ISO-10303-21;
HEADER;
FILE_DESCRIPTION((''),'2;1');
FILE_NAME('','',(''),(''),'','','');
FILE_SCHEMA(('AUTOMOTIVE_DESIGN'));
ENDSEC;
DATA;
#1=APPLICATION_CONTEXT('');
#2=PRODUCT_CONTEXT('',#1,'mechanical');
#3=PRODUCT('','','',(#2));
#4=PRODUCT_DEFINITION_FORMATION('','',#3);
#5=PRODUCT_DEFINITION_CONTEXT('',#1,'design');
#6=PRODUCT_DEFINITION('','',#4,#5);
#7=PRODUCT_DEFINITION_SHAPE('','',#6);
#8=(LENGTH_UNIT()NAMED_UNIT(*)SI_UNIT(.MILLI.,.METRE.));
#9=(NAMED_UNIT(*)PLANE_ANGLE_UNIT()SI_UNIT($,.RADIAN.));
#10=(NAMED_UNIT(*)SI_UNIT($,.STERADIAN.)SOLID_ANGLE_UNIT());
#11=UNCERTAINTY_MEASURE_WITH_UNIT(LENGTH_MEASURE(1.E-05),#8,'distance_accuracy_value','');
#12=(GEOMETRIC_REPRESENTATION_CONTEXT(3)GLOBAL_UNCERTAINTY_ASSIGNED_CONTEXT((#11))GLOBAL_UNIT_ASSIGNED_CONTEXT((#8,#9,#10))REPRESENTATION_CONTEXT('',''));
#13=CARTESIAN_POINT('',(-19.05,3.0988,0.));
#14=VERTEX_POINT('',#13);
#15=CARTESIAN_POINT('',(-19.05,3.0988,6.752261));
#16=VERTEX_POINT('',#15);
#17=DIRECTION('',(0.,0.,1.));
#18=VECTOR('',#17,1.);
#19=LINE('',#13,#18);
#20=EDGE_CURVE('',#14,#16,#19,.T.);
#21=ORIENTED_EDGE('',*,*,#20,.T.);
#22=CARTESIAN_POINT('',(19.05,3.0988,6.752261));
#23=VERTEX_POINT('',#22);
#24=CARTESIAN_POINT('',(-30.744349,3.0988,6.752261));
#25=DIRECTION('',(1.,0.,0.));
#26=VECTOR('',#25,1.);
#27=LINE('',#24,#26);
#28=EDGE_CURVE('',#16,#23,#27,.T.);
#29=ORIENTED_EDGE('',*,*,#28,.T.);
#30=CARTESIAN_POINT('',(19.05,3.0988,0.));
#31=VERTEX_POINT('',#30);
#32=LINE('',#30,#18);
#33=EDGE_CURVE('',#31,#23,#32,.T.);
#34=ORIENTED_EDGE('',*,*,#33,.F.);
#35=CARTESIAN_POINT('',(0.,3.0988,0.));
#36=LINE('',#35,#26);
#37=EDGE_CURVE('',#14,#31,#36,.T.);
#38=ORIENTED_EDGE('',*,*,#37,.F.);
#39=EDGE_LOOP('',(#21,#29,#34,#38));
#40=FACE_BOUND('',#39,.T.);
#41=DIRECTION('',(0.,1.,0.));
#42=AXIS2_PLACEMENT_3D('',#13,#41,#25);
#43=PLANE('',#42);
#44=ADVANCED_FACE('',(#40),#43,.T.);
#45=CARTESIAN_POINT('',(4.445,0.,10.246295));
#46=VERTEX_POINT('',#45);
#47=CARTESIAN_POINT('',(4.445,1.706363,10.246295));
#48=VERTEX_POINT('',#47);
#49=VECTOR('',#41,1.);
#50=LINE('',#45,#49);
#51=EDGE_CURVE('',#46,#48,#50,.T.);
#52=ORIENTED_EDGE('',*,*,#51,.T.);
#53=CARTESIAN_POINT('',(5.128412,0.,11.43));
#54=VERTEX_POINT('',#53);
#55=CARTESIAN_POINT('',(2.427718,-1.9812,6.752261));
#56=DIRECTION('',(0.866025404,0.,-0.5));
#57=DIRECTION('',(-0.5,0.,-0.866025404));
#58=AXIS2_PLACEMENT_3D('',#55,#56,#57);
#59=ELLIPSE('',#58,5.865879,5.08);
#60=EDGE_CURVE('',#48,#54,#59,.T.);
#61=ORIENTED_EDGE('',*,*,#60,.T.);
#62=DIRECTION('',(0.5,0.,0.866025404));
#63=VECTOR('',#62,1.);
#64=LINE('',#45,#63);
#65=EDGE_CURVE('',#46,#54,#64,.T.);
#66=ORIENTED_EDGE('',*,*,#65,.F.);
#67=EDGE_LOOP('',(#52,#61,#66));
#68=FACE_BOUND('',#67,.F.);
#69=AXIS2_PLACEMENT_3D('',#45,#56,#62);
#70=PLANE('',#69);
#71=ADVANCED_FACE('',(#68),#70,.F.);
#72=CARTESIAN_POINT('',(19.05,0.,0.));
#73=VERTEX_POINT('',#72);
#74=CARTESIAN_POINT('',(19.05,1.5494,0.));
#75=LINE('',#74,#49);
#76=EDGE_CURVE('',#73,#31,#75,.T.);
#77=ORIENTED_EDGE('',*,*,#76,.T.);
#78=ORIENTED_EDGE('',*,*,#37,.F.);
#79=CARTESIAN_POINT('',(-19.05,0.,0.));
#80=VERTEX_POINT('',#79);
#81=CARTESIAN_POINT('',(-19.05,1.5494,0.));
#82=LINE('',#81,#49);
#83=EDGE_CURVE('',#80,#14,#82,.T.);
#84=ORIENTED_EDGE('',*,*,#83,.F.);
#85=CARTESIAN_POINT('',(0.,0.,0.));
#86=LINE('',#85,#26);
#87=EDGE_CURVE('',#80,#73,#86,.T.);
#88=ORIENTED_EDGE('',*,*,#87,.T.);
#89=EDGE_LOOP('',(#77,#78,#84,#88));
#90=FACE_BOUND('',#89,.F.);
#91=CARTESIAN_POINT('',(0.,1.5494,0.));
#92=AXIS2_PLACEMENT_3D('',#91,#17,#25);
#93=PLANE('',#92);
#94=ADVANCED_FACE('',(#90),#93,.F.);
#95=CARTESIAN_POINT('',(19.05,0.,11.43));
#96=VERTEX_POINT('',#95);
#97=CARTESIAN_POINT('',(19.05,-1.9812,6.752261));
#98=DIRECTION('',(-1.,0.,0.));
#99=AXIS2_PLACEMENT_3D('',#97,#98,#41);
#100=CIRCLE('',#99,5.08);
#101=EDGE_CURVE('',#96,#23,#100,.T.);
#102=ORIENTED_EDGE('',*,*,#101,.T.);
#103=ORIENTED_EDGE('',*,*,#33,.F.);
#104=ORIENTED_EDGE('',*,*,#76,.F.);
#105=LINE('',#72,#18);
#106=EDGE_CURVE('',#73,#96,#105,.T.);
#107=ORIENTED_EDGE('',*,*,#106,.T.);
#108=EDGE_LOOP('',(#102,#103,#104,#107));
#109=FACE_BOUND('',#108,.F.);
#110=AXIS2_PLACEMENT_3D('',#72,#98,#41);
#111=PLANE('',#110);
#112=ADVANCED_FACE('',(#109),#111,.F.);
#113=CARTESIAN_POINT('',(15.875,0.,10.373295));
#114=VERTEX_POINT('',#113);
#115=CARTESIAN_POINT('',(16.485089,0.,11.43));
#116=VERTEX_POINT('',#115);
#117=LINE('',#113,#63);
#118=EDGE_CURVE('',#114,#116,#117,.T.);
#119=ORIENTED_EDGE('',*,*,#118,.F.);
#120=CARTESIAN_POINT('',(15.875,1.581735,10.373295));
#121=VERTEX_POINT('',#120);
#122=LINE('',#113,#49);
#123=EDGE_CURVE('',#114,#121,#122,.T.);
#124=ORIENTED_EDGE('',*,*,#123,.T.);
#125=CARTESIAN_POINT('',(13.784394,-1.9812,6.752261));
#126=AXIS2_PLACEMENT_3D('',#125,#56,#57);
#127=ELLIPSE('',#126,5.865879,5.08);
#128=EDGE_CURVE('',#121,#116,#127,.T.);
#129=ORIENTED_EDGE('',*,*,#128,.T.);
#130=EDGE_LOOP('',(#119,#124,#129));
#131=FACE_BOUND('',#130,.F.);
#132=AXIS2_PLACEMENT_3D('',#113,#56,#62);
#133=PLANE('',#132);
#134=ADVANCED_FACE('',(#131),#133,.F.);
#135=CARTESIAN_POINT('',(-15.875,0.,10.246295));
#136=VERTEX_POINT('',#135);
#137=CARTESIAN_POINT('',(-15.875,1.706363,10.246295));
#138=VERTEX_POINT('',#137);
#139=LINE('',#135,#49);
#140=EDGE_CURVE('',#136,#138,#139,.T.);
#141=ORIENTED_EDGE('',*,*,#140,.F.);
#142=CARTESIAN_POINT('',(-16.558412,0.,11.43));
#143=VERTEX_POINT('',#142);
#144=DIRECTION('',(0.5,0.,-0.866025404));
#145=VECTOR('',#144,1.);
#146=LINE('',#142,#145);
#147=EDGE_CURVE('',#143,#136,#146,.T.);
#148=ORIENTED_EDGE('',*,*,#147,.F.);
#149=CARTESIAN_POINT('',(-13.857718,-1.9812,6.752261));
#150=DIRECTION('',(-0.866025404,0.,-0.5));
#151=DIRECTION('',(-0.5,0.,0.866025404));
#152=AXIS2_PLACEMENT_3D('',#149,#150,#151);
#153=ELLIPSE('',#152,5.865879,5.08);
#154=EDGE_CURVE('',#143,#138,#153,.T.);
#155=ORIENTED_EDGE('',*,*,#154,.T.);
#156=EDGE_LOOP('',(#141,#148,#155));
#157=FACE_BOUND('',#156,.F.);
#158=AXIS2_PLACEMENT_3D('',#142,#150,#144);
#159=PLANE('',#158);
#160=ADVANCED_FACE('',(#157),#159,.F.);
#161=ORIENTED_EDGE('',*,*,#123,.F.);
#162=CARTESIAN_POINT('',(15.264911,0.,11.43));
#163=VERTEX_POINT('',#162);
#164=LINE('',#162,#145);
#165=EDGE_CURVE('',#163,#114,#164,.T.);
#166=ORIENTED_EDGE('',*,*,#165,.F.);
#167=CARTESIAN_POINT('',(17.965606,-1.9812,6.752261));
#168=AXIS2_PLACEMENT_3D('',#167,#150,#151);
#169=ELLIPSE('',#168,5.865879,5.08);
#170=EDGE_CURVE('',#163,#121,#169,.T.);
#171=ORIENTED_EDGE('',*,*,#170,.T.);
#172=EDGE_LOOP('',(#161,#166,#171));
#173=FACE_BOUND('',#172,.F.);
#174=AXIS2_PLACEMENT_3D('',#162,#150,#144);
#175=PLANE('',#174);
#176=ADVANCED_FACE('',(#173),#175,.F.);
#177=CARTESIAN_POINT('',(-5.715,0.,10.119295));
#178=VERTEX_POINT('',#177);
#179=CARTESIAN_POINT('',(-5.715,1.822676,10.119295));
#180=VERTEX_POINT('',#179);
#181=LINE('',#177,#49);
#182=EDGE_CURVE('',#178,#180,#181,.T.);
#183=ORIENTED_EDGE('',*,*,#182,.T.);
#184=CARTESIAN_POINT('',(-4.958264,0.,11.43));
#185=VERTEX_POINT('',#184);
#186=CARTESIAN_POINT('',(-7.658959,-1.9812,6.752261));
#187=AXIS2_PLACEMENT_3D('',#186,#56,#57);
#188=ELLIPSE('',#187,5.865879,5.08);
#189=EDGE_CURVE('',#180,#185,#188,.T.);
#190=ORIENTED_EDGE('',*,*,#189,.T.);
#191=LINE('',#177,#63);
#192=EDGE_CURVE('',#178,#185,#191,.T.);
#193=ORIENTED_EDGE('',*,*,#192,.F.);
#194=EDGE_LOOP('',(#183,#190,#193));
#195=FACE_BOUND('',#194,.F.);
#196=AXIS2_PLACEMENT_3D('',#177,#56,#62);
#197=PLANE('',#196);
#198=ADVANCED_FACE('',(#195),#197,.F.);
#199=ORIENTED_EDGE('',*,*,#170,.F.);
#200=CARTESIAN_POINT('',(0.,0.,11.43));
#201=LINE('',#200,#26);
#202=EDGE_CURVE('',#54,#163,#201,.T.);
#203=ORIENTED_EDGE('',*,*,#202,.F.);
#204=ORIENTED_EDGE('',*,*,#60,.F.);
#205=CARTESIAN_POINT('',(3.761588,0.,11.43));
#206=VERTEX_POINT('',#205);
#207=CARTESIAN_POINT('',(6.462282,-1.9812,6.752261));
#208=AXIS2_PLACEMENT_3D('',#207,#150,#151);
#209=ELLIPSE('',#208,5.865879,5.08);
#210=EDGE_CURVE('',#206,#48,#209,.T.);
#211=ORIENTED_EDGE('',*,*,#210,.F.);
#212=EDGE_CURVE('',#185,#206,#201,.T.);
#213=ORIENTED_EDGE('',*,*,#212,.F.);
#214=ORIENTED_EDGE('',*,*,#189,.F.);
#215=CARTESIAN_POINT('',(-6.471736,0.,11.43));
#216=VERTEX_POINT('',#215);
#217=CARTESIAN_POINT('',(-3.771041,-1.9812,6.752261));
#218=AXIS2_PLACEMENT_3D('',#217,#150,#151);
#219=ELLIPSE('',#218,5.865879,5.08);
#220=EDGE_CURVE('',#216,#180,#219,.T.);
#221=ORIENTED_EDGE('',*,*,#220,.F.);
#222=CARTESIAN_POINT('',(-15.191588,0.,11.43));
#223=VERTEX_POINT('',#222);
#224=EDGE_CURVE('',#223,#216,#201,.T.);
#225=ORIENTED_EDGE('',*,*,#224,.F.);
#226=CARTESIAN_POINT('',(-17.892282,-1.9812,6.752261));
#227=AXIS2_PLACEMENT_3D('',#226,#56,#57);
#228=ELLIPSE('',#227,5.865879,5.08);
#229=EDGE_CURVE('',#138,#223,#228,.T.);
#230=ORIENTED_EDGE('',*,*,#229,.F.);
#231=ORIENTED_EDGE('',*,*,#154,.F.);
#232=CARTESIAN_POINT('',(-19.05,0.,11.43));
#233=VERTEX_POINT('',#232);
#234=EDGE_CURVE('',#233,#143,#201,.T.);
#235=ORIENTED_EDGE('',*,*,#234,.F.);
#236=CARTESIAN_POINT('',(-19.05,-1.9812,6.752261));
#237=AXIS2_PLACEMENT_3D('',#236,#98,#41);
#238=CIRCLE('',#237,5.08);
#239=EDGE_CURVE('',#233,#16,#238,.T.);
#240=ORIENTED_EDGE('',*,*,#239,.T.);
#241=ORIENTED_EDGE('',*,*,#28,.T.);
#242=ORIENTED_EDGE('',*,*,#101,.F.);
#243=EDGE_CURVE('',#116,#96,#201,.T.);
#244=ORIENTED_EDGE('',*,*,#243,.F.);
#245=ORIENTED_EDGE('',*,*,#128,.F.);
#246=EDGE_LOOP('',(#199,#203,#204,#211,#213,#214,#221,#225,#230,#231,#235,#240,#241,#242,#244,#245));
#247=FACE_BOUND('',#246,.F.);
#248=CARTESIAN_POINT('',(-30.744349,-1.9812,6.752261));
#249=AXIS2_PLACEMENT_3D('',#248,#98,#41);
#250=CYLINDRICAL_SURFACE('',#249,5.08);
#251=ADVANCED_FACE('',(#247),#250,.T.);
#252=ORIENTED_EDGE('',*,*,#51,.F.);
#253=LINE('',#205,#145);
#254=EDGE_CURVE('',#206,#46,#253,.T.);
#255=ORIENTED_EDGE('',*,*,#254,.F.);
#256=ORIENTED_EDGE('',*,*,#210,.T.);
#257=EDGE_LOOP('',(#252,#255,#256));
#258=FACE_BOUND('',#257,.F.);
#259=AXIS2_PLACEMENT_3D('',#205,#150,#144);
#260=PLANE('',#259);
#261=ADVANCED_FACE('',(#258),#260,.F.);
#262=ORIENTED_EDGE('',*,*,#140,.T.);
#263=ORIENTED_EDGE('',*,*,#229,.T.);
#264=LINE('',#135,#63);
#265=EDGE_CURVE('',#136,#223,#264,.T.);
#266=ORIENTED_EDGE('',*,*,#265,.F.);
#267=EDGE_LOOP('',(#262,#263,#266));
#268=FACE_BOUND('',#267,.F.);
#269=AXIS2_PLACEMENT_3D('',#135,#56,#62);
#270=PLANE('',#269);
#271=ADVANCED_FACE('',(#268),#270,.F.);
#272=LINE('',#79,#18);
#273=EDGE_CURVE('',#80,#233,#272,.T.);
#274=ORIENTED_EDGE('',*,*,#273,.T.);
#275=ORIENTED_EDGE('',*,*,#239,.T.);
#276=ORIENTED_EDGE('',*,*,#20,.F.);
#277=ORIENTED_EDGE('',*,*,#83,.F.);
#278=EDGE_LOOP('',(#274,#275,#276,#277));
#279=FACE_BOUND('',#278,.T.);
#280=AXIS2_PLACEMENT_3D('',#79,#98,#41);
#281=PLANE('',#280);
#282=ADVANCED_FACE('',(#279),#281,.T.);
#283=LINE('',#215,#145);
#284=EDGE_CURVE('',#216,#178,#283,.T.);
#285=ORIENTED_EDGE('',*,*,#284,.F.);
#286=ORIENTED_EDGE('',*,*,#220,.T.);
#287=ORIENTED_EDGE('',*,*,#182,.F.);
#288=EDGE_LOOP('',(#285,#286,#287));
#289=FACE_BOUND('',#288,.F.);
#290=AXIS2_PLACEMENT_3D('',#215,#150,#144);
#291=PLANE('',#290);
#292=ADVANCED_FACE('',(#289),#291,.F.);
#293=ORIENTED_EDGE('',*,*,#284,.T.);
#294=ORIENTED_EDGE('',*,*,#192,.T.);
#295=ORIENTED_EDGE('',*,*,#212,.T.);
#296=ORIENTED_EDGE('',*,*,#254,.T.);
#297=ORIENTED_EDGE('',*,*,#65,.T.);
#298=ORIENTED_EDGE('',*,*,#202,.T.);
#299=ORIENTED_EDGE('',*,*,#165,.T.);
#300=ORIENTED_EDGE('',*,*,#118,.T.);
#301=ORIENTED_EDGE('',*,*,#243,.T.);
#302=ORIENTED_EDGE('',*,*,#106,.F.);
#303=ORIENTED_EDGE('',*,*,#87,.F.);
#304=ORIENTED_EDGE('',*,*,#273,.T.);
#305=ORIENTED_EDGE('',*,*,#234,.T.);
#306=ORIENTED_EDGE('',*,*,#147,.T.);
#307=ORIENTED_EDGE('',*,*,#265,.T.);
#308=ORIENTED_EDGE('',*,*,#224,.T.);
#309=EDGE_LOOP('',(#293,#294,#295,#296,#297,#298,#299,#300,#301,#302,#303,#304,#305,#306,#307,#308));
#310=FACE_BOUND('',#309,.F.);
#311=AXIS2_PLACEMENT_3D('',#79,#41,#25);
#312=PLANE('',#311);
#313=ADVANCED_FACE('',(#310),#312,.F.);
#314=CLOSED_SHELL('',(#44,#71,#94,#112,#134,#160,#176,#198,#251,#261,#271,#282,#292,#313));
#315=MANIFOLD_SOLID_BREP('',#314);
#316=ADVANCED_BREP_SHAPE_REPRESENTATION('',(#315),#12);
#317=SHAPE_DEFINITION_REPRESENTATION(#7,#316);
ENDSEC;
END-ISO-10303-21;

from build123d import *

# Parameters (mm, degrees)
F0_W        = 38.1
F0_H        = 3.0988
F1_DEPTH    = 11.43
F3_T1_DEPTH = 61.4886973558
F4_DEPTH    = 25.4


# Not quite as in the source:
# - a fillet or chamfer that OpenCascade refuses, or shapes differently, is made with other operations: its cross-section is extruded or revolved along the edge and cut away or added


with BuildPart() as f1:
    # F0 (on Top) → F1 (new body)
    with BuildSketch(Plane.XY):
        with Locations((0, 1.5494)):
            Rectangle(F0_W, F0_H)
    extrude(amount=F1_DEPTH)

    # F3: fillet of radius 5.08 on 1 edges, made by hand

    # F3_s2 → F3_t1 (cut)
    with BuildSketch(Plane.YZ.offset(-30.7443486779)):
        with BuildLine():
            ThreePointArc((3.0988, 6.7522605288), (2.2538263281, 9.5577822272), (0, 11.43))
            Line((0, 11.43), (3.0988, 11.43))
            Line((3.0988, 11.43), (3.0988, 6.7522605288))
        make_face()
    extrude(amount=F3_T1_DEPTH, mode=Mode.SUBTRACT)

    # F2 (on face) → F4 (cut)
    with BuildSketch(Plane.XZ):
        Polygon((-15.875, 10.2462954744), (-15.1915878735, 11.43), (-16.5584121265, 11.43), align=None)
        Polygon((-4.9582643893, 11.43), (-6.4717356107, 11.43), (-5.715, 10.1192954744), align=None)
        Polygon((5.1284121265, 11.43), (3.7615878735, 11.43), (4.445, 10.2462954744), align=None)
        Polygon((16.4850886423, 11.43), (15.2649113577, 11.43), (15.875, 10.3732954744), align=None)
    extrude(amount=-F4_DEPTH, mode=Mode.SUBTRACT)


solid = f1.part
